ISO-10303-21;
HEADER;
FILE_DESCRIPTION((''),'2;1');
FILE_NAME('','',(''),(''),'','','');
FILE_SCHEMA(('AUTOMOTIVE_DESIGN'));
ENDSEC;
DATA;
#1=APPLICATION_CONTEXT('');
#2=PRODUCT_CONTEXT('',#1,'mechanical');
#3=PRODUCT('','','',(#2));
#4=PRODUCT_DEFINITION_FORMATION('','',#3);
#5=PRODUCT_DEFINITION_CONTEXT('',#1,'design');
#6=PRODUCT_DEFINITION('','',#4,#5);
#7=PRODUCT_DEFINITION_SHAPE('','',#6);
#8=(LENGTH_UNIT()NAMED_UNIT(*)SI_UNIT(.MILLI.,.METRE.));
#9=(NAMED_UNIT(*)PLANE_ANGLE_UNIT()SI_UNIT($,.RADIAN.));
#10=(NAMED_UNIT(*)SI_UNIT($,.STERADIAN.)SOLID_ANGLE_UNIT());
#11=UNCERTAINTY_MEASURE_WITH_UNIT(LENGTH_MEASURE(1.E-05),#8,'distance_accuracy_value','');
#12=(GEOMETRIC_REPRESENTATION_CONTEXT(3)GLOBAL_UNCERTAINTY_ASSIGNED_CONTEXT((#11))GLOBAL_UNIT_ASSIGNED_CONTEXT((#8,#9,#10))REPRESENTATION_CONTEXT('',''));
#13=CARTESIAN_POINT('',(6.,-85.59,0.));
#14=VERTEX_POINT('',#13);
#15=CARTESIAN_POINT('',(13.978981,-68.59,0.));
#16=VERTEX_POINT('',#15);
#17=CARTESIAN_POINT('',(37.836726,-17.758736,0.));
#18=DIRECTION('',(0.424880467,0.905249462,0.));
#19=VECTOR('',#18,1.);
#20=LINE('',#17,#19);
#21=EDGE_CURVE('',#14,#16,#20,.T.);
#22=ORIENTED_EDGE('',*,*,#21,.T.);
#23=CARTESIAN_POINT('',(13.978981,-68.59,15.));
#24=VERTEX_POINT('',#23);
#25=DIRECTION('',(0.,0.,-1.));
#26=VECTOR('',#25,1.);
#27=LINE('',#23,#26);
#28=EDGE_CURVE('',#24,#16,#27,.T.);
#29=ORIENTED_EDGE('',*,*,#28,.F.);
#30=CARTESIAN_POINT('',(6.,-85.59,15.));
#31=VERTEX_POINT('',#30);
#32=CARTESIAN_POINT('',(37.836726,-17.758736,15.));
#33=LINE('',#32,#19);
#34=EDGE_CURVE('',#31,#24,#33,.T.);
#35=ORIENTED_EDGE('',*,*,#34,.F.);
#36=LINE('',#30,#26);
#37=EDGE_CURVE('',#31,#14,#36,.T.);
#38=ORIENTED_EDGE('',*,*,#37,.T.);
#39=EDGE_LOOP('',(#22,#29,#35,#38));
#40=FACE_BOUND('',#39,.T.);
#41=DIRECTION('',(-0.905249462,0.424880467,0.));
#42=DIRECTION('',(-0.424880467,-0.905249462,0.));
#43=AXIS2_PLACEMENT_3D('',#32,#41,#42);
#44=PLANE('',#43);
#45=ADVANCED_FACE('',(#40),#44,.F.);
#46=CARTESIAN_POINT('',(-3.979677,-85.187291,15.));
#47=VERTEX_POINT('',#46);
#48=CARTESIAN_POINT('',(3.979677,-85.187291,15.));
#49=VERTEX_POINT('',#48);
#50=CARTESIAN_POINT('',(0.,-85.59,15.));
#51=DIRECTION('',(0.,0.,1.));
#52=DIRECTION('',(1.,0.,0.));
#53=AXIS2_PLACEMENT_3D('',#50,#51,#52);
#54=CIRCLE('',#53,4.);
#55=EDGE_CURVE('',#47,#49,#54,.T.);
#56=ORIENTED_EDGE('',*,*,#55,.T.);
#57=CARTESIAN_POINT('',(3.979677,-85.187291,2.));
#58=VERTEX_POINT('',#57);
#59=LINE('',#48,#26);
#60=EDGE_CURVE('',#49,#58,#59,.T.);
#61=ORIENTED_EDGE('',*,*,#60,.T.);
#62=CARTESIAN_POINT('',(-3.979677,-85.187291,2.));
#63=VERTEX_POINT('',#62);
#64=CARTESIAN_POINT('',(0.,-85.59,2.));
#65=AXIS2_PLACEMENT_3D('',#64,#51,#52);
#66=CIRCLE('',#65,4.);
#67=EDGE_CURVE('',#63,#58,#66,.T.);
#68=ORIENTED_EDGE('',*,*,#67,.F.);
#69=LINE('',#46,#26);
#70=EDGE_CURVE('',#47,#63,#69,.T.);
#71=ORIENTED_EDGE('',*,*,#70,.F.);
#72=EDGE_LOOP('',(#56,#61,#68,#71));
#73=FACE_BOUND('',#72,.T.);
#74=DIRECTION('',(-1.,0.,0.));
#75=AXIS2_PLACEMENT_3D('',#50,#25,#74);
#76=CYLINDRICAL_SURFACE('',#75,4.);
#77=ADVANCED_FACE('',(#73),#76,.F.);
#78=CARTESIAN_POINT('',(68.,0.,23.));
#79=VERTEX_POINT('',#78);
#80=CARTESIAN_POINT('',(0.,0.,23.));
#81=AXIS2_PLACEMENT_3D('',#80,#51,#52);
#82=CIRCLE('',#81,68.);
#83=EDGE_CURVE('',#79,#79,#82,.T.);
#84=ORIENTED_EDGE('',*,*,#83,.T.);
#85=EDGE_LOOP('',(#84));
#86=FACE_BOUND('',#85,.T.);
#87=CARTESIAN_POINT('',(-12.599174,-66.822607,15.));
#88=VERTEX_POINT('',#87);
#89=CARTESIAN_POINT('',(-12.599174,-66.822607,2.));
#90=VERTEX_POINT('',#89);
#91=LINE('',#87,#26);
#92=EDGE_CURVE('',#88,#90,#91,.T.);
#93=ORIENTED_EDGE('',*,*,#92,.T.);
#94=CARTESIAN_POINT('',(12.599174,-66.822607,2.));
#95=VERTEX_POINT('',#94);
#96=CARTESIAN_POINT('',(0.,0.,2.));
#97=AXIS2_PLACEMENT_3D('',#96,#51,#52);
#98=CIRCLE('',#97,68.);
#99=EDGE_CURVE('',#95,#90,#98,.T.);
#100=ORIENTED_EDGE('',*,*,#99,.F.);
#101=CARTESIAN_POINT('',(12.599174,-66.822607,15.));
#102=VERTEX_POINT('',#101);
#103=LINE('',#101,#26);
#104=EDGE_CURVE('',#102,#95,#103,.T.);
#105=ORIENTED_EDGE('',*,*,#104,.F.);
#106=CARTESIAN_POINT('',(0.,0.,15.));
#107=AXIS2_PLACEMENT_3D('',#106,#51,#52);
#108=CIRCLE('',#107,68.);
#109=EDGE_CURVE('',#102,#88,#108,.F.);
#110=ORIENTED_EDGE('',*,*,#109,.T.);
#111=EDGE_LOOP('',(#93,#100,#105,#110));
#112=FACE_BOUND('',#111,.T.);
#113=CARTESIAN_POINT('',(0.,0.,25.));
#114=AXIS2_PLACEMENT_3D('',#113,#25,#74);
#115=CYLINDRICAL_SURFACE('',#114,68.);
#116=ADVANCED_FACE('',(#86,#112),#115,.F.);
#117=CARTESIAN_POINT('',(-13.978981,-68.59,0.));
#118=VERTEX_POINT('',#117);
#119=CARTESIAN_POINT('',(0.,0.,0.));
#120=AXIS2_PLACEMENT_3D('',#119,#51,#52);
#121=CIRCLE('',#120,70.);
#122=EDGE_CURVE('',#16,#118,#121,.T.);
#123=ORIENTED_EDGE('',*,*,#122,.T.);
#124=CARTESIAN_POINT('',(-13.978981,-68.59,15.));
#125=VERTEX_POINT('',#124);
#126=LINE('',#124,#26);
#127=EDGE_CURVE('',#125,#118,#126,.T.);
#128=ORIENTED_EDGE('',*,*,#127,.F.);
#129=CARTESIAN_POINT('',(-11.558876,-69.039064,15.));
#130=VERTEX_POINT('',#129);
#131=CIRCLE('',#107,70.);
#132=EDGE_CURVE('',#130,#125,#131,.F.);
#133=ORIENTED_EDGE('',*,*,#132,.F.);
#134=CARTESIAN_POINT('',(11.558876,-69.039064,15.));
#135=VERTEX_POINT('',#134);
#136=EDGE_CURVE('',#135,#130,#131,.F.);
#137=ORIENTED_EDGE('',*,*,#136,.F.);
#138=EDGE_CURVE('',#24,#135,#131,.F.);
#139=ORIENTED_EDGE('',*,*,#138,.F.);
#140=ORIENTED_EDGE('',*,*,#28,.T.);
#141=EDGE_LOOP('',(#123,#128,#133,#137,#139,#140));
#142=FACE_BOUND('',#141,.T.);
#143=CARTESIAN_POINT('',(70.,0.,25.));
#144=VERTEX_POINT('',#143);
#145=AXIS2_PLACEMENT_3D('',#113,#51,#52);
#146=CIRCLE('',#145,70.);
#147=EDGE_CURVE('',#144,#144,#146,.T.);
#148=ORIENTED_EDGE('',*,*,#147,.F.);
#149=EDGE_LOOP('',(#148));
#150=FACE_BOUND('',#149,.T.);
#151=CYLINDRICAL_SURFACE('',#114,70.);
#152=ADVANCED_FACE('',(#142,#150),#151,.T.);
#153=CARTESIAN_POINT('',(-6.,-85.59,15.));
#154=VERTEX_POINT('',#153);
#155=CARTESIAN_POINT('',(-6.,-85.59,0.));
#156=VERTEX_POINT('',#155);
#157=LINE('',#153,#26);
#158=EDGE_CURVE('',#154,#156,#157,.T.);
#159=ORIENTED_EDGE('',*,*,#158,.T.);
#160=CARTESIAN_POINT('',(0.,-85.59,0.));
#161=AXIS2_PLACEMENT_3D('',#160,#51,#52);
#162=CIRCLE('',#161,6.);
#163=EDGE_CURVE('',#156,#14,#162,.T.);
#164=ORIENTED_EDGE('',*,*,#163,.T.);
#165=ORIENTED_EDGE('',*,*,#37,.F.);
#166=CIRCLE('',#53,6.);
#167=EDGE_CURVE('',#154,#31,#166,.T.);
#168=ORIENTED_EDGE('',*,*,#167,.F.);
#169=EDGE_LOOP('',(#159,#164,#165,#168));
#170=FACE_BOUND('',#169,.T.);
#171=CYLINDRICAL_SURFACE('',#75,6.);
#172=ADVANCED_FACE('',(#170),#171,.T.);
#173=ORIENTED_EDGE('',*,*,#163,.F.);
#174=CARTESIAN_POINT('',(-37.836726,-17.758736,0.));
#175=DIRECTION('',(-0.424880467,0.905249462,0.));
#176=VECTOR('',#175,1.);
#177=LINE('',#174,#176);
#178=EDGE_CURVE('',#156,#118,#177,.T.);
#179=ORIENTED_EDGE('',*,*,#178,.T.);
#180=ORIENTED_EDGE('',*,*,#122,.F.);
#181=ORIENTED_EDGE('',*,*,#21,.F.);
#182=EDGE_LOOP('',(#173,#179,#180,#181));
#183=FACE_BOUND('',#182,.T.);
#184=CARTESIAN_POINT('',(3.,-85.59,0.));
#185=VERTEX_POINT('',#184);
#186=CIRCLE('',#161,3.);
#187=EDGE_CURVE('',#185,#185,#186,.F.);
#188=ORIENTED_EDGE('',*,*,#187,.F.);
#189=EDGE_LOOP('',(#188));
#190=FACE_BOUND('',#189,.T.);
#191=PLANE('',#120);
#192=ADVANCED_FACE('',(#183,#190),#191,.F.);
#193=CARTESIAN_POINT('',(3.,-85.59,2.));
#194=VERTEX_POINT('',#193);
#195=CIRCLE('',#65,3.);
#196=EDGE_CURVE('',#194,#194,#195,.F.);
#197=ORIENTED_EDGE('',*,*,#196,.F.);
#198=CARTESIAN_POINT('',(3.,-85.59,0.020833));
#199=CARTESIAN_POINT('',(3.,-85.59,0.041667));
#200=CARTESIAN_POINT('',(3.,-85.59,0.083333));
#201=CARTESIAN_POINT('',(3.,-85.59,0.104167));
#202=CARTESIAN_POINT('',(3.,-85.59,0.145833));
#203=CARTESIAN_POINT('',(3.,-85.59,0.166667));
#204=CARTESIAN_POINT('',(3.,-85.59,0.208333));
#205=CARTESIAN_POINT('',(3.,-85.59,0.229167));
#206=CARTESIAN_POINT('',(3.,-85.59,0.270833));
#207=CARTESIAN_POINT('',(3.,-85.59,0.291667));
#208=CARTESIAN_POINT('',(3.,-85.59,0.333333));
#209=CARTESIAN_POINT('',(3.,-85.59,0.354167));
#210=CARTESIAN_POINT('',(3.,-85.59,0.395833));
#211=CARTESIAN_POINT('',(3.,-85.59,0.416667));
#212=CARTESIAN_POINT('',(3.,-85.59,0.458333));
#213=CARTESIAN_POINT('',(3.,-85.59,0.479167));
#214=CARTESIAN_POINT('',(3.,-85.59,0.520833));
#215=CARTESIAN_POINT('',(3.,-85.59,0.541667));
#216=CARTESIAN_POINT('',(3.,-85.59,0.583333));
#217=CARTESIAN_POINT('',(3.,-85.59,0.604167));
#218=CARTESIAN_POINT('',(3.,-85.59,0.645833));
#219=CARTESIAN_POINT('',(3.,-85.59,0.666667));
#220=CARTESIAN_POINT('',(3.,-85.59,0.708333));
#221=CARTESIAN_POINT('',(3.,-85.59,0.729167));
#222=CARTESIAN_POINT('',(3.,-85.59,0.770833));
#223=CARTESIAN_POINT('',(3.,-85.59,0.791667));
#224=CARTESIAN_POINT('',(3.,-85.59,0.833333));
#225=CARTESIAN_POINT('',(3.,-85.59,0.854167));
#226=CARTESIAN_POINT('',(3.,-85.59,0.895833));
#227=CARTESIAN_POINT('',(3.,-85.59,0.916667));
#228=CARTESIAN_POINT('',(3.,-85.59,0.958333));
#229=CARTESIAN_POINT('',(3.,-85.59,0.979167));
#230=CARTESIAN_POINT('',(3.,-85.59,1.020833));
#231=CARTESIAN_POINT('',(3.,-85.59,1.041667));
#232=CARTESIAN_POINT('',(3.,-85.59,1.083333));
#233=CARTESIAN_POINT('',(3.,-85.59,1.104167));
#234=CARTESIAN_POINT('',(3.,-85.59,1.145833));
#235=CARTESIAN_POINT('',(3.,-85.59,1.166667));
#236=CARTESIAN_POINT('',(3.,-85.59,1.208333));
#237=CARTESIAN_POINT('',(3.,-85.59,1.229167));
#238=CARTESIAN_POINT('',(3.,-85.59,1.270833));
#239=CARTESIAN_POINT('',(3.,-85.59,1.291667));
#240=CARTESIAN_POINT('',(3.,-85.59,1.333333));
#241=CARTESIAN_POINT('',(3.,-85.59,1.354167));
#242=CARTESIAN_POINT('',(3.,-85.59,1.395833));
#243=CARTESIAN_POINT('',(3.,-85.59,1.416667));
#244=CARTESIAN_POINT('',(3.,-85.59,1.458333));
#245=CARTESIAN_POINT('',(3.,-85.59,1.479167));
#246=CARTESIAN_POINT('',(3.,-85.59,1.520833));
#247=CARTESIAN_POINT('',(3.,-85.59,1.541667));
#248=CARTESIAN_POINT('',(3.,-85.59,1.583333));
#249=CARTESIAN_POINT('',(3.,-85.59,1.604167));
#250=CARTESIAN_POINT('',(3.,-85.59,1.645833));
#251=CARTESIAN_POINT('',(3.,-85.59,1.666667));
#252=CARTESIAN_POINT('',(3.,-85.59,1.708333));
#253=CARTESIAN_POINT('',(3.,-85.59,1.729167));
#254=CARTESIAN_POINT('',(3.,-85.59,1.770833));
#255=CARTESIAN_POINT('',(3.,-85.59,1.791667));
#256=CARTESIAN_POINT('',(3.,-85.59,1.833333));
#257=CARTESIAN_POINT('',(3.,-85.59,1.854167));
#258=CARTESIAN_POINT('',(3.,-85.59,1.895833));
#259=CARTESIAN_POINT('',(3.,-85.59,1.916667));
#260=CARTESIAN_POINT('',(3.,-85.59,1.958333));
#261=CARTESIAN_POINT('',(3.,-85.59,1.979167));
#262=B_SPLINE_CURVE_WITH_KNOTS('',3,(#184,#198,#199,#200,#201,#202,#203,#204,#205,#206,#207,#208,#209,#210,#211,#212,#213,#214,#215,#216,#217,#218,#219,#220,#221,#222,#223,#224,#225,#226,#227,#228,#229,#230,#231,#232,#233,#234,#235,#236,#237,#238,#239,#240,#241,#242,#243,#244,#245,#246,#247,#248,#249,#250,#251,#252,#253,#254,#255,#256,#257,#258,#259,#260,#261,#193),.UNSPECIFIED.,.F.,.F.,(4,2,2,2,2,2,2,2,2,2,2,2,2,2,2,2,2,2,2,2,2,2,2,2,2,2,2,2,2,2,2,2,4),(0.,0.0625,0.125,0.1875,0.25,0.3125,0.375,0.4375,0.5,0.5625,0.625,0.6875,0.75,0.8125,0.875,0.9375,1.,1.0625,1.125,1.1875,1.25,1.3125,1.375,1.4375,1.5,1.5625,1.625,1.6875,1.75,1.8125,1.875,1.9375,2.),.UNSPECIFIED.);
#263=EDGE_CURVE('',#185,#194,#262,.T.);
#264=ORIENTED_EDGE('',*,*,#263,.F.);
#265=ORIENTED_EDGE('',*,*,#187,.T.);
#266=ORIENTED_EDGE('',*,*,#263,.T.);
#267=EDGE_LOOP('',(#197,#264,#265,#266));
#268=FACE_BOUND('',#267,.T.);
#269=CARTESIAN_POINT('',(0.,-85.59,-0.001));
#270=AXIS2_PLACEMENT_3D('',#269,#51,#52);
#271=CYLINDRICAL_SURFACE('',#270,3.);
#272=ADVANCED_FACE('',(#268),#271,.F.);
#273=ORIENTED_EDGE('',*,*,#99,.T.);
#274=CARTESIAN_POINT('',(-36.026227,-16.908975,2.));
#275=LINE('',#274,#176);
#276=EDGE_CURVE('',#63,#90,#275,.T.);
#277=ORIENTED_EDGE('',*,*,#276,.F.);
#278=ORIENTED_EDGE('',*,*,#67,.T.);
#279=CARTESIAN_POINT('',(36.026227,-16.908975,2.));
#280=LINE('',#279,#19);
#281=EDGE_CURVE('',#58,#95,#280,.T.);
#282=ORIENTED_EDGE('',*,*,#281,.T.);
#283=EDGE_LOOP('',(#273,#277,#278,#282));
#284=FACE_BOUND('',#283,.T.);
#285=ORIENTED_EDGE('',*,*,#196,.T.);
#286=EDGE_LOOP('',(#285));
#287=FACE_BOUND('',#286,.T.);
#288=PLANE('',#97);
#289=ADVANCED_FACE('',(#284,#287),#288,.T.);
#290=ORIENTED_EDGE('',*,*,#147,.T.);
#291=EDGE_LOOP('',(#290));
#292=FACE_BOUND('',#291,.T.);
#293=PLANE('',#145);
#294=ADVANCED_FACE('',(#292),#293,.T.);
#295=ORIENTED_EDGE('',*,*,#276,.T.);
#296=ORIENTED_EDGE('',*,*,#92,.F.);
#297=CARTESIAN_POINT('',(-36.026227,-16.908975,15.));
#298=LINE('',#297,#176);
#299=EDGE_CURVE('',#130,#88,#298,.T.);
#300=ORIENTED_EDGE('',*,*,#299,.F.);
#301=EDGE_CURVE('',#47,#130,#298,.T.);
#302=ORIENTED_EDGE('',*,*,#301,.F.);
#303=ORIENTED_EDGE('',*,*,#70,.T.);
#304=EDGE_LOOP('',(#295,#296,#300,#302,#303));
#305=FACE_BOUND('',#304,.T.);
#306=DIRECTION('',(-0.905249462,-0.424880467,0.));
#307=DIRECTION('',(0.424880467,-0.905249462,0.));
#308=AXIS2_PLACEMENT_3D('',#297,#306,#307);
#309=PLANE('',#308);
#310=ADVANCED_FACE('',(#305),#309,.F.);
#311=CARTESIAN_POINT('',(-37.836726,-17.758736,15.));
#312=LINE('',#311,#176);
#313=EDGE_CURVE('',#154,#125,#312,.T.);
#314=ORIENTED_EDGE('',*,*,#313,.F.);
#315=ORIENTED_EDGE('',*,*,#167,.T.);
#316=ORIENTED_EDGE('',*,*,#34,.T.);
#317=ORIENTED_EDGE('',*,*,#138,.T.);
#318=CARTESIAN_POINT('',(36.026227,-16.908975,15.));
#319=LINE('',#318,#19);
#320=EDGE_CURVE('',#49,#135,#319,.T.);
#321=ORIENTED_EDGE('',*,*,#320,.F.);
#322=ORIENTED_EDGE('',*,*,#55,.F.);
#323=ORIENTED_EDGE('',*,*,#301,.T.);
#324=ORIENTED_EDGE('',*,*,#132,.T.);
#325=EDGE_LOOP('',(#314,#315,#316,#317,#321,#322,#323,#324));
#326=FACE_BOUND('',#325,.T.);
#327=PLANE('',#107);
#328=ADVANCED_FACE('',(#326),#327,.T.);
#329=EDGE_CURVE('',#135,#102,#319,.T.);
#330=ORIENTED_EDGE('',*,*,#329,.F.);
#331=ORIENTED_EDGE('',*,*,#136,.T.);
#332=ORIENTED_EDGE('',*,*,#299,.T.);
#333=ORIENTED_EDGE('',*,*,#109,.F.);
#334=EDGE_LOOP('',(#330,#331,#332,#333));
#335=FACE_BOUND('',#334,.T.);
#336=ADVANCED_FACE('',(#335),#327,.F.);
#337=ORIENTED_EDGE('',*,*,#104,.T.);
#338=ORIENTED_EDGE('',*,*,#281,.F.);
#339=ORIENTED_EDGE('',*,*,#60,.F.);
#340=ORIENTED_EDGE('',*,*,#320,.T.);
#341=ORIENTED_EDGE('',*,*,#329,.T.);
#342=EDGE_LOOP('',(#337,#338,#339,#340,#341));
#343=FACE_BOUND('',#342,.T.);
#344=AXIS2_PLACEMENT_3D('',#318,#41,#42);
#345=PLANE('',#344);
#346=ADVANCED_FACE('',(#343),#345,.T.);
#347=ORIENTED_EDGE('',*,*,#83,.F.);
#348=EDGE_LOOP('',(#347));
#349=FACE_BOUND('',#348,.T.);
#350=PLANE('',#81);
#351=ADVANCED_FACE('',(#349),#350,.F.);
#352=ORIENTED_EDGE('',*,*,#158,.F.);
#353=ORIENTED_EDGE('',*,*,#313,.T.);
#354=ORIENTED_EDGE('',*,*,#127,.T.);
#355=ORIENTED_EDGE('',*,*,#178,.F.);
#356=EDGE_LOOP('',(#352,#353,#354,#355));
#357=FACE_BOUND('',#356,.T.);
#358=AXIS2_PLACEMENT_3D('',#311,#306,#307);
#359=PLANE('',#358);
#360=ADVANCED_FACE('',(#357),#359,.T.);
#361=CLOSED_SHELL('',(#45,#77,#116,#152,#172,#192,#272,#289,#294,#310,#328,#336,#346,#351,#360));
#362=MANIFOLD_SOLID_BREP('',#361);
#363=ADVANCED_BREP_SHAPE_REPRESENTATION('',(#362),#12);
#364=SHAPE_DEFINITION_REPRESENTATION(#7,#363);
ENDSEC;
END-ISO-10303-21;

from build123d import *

# Parameters (mm, degrees)
SKETCH1_R           = 70
BOSS_EXTRUDE1_DEPTH = 25
SKETCH21_R          = 6
BOSS_EXTRUDE4_DEPTH = 15
CUT_EXTRUDE2_REACH  = 118.249
SKETCH22_R          = 3
SHELL15_START       = 2
SHELL15_OUTLINE_R   = 68
SHELL15_DEPTH       = 21
SHELL15_2_OUTLINE_R = 3
SHELL15_2_DEPTH     = 13


# Read off the part's stored shape, not the designer's step: Shell15
with BuildPart() as part:
    # Sketch1 → Boss-Extrude1 (new body)
    with BuildSketch(Plane.XY):
        Circle(SKETCH1_R)
    extrude(amount=BOSS_EXTRUDE1_DEPTH)

    # Sketch21 → Boss-Extrude4 (add)
    with BuildSketch(Plane.XY):
        with Locations((0, -85.59)):
            Circle(SKETCH21_R)
        with BuildLine():
            Line((-13.97898065, -68.59), (-6, -85.59))
            ThreePointArc((-6, -85.59), (0, -79.59), (6, -85.59))
            Line((6, -85.59), (13.97898065, -68.59))
            ThreePointArc((13.97898065, -68.59), (0, -70), (-13.97898065, -68.59))
        make_face()
    extrude(amount=BOSS_EXTRUDE4_DEPTH)

    # Sketch22 → Cut-Extrude2 (cut, up to next)
    with BuildSketch(Plane.XY.offset(15), mode=Mode.PRIVATE) as cut_extrude2_sk1:
        with Locations((0, -85.59)):
            Circle(SKETCH22_R)
    cut_extrude2_tool1 = extrude(cut_extrude2_sk1.sketch, amount=-CUT_EXTRUDE2_REACH, mode=Mode.PRIVATE) & part.part
    add(cut_extrude2_tool1.solids().sort_by_distance((0, -85.59, 15))[0], mode=Mode.SUBTRACT)

    # Shell15 outline → Shell15 (cut)
    with BuildSketch(Plane.XY.offset(SHELL15_START)):
        Circle(SHELL15_OUTLINE_R)
    extrude(amount=SHELL15_DEPTH, mode=Mode.SUBTRACT)

    # Shell15 2 outline → Shell15 2 (cut)
    with BuildSketch(Plane.XY.offset(SHELL15_START)):
        with BuildLine():
            ThreePointArc((12.599173957, -66.82260707), (0, -68), (-12.599173957, -66.82260707))
            Line((-12.599173957, -66.82260707), (-3.979676533, -85.187290811))
            ThreePointArc((-3.979676533, -85.187290811), (0, -89.59), (3.979676533, -85.187290811))
            Line((3.979676533, -85.187290811), (12.599173957, -66.82260707))
        make_face()
        with Locations((0, -85.59)):
            Circle(SHELL15_2_OUTLINE_R, mode=Mode.SUBTRACT)
    extrude(amount=SHELL15_2_DEPTH, mode=Mode.SUBTRACT)


solid = part.part
